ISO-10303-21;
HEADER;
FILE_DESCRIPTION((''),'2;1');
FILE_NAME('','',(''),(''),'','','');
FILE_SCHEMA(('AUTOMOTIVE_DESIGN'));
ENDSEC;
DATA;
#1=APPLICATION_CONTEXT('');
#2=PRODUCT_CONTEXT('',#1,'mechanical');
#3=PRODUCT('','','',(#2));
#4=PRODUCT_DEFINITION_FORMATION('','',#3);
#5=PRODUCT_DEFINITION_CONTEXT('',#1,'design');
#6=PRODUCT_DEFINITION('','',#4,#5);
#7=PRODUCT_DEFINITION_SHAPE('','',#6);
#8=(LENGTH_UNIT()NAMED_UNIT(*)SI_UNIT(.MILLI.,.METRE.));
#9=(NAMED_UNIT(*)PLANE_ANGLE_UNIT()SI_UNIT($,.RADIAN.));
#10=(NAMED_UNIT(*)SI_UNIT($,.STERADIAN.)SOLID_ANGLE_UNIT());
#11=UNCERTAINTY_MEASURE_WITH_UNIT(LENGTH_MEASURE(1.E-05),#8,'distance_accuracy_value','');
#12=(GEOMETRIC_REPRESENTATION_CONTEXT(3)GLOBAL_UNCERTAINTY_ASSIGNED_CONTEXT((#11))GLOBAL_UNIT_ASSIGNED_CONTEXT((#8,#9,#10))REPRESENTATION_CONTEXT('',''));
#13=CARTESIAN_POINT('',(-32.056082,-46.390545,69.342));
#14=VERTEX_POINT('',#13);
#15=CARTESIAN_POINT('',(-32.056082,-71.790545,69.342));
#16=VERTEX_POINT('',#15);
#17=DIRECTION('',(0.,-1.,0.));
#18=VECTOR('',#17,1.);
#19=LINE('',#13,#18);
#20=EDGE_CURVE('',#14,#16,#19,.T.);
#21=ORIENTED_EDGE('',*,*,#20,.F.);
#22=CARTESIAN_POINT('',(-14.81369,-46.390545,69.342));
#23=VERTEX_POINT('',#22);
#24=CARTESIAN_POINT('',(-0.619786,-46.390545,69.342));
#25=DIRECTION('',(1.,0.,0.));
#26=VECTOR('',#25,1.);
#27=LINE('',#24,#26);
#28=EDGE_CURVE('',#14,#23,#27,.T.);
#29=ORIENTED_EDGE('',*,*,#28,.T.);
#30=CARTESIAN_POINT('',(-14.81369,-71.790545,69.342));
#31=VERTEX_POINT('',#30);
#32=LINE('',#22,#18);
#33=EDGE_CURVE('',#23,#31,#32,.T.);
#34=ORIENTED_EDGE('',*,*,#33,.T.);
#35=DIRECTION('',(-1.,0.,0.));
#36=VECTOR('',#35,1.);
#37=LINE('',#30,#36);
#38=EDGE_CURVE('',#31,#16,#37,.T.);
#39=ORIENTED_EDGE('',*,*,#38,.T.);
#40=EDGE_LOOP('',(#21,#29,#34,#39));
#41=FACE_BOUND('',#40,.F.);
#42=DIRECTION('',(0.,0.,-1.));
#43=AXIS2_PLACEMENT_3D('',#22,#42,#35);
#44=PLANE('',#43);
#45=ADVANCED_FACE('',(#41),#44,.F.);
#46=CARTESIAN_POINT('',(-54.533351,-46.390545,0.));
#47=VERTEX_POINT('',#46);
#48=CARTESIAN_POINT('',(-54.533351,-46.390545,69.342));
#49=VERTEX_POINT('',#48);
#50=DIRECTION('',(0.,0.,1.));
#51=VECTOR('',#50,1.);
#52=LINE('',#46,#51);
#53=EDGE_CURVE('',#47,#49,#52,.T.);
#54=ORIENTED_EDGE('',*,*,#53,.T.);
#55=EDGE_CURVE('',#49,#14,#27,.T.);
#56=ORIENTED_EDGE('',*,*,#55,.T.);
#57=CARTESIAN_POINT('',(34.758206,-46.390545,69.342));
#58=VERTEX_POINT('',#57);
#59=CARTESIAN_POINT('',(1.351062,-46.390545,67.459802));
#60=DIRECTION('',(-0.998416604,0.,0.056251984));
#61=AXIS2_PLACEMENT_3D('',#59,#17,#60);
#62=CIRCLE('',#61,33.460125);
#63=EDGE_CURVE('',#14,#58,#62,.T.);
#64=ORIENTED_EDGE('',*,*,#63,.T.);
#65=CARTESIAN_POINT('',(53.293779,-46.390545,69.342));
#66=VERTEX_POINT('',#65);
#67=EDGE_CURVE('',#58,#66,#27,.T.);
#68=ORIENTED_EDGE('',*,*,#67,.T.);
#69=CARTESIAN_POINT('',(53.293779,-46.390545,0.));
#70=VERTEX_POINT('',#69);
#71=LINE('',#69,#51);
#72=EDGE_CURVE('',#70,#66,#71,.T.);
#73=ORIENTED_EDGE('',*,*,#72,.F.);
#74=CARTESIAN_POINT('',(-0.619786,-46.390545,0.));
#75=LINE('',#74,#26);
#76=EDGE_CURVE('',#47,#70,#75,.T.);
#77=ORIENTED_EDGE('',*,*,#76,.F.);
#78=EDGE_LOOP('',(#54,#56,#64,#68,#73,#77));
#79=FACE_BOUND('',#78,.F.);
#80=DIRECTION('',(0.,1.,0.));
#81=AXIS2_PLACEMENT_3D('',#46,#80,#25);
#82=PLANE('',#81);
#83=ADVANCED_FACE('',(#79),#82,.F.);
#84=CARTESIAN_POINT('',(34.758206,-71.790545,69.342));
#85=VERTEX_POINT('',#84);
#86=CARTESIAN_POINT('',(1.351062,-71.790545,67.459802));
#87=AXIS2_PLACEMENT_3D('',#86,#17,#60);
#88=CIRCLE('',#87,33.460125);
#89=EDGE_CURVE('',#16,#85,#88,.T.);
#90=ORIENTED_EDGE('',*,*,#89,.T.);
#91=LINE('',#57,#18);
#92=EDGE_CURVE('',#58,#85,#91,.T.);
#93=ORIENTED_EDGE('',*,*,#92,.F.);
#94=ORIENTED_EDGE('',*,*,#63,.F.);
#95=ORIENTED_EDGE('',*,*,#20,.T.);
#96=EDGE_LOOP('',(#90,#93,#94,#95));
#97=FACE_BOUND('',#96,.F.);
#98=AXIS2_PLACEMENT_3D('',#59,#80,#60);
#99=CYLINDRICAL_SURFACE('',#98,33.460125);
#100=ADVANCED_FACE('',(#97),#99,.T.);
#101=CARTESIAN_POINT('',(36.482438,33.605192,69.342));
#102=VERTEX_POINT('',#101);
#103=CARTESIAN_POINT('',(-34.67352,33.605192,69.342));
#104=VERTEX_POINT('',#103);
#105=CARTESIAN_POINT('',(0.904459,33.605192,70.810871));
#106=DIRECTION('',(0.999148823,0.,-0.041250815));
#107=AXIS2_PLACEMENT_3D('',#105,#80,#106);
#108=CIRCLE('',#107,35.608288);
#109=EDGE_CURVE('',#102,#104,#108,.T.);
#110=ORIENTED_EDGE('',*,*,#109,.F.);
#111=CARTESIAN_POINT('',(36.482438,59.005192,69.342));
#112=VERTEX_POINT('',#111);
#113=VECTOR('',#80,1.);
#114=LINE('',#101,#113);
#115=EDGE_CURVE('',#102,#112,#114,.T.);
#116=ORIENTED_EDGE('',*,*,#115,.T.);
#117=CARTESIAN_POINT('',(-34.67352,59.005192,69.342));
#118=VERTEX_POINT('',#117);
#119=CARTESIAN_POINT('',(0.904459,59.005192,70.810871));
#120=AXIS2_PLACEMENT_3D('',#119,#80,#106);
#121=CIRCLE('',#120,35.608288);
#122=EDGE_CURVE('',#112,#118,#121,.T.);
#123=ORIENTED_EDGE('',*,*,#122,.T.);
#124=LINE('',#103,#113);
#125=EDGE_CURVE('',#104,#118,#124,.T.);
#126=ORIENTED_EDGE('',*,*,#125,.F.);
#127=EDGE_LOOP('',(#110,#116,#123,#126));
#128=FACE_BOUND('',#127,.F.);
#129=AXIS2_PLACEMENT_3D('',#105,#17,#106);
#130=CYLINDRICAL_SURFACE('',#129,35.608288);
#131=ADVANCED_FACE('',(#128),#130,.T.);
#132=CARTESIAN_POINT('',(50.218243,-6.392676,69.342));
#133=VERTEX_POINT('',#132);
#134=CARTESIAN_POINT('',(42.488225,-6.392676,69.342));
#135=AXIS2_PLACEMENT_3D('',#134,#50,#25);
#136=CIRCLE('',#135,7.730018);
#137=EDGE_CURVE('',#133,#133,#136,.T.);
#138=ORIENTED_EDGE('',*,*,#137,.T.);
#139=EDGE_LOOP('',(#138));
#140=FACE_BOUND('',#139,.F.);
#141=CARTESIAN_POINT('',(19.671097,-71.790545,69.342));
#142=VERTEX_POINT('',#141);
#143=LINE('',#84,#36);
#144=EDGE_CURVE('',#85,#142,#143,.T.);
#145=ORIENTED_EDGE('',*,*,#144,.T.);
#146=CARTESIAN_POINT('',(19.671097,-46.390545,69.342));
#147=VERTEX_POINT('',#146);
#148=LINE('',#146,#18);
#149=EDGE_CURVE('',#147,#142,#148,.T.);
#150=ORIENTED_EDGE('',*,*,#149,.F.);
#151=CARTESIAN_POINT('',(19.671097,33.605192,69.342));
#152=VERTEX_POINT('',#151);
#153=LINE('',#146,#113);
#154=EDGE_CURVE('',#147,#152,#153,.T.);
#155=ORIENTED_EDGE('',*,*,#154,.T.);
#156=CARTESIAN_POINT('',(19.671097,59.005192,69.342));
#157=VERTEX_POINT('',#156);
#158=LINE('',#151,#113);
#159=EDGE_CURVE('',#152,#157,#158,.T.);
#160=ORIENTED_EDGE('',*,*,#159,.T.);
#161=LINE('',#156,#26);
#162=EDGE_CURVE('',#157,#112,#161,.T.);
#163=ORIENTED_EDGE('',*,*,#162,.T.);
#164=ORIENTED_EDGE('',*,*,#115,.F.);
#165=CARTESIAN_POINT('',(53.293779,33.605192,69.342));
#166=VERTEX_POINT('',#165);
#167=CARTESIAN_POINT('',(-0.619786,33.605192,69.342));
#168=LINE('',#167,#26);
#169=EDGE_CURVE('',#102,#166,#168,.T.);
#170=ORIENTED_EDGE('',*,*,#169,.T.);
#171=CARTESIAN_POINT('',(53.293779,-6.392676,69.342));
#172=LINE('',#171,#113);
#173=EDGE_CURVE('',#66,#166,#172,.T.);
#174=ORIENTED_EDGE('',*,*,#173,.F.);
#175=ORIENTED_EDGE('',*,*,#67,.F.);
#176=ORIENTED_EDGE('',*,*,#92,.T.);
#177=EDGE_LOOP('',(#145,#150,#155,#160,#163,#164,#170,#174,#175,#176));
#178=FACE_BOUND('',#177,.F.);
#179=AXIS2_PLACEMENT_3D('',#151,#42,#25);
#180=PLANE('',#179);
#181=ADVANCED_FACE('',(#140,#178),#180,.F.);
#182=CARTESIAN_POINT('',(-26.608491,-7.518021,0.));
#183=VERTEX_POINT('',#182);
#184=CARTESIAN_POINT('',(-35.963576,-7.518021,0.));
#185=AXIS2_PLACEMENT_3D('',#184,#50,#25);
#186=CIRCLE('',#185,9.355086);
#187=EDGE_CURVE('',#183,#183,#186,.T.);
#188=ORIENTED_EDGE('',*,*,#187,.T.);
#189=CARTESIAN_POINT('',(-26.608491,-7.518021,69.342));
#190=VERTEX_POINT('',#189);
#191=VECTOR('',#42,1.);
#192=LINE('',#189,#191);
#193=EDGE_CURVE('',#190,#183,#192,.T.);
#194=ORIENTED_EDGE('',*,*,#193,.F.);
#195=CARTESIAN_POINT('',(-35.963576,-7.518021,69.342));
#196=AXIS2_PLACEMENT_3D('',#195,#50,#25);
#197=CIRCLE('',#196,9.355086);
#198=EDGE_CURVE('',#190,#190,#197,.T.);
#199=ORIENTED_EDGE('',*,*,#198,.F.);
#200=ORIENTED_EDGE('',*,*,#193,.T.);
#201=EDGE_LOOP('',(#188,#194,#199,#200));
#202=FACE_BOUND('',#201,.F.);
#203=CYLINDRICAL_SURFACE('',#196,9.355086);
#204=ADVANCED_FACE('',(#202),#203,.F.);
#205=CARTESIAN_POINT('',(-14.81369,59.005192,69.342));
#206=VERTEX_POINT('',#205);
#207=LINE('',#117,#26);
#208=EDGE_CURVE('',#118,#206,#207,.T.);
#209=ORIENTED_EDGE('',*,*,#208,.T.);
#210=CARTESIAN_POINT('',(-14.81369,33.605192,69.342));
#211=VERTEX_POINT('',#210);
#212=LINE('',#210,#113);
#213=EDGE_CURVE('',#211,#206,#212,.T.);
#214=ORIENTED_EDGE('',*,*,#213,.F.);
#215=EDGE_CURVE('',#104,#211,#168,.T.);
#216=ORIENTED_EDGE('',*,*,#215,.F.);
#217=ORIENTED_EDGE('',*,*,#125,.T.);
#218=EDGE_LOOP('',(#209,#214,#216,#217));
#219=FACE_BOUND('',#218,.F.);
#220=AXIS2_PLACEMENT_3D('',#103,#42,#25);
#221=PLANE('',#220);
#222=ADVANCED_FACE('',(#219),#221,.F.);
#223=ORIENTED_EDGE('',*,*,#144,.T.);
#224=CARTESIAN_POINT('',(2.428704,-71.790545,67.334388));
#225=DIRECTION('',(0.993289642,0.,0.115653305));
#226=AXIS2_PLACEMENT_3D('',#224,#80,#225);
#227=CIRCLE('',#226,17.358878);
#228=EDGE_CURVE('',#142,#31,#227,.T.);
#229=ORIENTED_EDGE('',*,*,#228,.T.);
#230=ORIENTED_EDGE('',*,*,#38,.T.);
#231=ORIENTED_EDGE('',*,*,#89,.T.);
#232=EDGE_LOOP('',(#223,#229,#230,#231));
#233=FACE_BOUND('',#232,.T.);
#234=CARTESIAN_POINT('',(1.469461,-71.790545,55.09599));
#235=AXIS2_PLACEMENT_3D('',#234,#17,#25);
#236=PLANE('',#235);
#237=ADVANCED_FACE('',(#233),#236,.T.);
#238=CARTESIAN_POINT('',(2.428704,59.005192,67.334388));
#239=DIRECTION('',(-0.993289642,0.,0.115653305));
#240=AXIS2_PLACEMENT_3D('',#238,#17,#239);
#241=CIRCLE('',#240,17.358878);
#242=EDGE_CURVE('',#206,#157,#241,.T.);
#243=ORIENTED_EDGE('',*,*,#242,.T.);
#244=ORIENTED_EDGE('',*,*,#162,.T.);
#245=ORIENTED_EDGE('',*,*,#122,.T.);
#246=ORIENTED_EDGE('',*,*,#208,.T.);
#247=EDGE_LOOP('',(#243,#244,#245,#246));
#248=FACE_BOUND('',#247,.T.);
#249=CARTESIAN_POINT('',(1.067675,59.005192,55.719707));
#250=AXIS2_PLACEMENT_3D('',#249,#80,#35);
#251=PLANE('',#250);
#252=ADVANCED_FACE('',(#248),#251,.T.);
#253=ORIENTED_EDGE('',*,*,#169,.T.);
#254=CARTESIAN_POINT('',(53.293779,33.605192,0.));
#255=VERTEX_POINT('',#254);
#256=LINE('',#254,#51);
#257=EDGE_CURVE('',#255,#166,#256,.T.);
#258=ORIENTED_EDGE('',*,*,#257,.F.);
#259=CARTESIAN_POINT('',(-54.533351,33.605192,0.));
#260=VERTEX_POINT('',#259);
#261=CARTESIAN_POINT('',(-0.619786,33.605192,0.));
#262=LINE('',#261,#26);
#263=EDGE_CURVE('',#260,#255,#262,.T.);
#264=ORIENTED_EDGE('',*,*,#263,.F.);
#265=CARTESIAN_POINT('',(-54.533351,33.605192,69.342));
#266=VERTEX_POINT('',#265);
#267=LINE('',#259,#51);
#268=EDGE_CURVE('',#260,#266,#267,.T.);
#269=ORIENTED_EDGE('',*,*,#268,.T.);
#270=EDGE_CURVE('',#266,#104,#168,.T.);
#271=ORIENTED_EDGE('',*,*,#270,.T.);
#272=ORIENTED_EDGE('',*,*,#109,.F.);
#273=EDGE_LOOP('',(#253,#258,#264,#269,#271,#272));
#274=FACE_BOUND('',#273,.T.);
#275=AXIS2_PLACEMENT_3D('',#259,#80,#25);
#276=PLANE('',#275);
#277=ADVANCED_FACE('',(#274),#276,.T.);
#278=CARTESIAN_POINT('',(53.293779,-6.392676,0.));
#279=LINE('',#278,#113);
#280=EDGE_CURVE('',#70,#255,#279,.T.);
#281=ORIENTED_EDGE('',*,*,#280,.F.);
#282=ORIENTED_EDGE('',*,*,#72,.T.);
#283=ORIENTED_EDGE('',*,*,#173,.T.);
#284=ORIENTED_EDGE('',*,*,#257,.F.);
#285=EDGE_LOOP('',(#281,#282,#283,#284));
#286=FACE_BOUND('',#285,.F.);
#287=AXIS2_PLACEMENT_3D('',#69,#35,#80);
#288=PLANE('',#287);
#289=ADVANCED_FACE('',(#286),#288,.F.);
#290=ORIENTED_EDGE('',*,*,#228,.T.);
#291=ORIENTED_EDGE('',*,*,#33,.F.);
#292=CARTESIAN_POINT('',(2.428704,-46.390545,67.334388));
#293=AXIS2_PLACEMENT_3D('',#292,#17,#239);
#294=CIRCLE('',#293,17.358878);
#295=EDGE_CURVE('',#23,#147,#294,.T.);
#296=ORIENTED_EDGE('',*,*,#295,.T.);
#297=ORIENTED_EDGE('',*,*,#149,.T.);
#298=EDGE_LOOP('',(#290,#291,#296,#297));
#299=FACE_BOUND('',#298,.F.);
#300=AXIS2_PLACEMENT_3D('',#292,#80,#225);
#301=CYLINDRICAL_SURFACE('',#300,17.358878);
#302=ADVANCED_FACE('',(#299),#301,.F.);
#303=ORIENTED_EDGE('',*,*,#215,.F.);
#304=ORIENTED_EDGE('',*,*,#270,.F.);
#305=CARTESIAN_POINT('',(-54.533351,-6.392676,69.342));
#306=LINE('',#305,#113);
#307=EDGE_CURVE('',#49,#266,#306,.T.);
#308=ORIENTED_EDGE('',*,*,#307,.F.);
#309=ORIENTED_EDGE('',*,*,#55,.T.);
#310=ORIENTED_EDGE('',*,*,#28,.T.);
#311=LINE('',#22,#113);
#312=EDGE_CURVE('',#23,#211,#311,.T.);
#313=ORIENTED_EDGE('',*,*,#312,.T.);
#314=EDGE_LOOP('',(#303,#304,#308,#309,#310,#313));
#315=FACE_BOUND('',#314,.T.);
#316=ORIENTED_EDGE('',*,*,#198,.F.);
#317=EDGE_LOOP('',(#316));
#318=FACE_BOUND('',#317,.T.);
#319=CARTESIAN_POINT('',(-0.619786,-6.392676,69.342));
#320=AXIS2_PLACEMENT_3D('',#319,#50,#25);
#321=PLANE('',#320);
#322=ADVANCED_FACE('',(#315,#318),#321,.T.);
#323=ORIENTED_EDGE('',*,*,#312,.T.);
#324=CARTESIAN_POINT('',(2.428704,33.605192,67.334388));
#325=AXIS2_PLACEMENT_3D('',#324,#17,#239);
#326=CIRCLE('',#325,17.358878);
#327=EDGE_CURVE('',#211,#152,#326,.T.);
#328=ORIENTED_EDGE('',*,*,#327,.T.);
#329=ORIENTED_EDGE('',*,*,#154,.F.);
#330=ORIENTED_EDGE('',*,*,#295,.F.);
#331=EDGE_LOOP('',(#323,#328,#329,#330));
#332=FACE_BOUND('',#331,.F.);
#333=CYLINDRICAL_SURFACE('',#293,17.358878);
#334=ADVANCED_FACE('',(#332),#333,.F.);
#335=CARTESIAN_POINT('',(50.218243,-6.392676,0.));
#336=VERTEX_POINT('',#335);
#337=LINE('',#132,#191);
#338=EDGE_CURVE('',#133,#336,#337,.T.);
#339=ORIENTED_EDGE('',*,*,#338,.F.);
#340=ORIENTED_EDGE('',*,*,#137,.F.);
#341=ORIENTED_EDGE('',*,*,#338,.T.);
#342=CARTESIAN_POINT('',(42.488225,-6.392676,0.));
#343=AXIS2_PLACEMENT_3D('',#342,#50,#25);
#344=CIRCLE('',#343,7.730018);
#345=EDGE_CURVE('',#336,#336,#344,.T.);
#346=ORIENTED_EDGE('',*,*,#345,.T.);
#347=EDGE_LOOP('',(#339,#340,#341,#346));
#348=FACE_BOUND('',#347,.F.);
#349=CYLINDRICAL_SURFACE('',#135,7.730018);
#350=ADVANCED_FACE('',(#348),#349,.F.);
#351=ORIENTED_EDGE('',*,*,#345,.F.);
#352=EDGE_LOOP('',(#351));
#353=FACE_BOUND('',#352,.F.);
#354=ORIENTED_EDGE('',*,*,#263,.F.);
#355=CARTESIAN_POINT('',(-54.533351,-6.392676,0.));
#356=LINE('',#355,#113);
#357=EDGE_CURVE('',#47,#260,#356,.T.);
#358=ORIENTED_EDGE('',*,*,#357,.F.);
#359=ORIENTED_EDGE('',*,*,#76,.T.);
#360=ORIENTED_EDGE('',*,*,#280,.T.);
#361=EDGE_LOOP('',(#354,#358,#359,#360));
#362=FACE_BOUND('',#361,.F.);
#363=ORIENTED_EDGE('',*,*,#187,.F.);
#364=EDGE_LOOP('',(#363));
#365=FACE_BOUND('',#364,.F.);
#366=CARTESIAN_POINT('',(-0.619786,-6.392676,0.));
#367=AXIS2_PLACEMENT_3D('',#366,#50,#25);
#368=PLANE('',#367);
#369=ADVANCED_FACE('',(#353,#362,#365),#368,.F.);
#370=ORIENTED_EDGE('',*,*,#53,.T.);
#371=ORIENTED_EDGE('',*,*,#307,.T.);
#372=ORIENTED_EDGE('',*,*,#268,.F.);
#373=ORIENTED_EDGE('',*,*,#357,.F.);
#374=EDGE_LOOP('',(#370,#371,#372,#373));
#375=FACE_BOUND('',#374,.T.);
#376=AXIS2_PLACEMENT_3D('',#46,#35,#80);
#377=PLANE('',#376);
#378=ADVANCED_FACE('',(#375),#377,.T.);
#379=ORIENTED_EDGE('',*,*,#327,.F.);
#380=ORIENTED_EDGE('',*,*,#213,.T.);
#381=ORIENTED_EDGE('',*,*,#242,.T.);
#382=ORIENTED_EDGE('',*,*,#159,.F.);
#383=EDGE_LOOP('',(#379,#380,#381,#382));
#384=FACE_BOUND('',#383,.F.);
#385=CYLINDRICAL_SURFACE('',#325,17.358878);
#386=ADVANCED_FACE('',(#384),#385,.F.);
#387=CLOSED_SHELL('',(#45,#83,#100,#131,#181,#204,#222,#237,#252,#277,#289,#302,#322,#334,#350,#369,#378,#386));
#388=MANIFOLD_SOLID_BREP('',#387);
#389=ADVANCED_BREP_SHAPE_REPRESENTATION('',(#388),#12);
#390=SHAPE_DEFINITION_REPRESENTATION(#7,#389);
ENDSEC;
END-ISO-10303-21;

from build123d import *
from build123d import SkipClean  # not in build123d's __all__

# Parameters (mm, degrees)
F0_W     = 107.8271307051
F0_H     = 79.9957364798
F1_DEPTH = 69.342
F3_DEPTH = 171.704
F4_DEPTH = 25.4
F6_DEPTH = 25.4
F7_R     = 9.3550857854
F8_DEPTH = 220.218
F7_R_2   = 7.7300183475
F9_DEPTH = 194.31


# Not quite as in the source:
# - after a boolean that leaves OpenCascade's solid faulty, fix() repairs it


with BuildPart() as f1:
    # F0 (on Top) → F1 (new body)
    with BuildSketch(Plane.XY):
        with Locations((-0.6197858602, -6.3926763833)):
            Rectangle(F0_W, F0_H)
    extrude(amount=F1_DEPTH)

    # F2 (on face) → F3 (cut)
    with BuildSketch(Plane.XZ.offset(46.3905446231)):
        with BuildLine():
            Line((19.6710973978, 69.342), (-14.813689515, 69.342))
            ThreePointArc((-14.813689515, 69.342), (2.4287039414, 49.9755106866), (19.6710973978, 69.342))
        make_face()
    extrude(amount=-F3_DEPTH, mode=Mode.SUBTRACT)

    # F2 (on face) → F4 (join)
    with BuildSketch(Plane.XZ.offset(46.3905446231)):
        with BuildLine():
            Line((-14.813689515, 69.342), (-32.0560820401, 69.342))
            ThreePointArc((-32.0560820401, 69.342), (1.3510622084, 33.9996767093), (34.7582064569, 69.342))
            Line((34.7582064569, 69.342), (19.6710973978, 69.342))
            ThreePointArc((19.6710973978, 69.342), (2.4287039414, 49.9755106866), (-14.813689515, 69.342))
        make_face()
    with SkipClean():  # cleaning this boolean's faces spoils the solid; the shape is the same uncleaned
        extrude(amount=F4_DEPTH)

    # F5 (on face) → F6 (join)
    with BuildSketch(Plane(origin=(0, 33.6051918566, 0), x_dir=(-1, 0, 0), z_dir=(0, 1, 0))):
        with BuildLine():
            Line((-19.6710973978, 69.342), (-36.4824384451, 69.342))
            ThreePointArc((-36.4824384451, 69.342), (-0.9044590406, 35.2025825454), (34.6735203639, 69.342))
            Line((34.6735203639, 69.342), (14.813689515, 69.342))
            ThreePointArc((14.813689515, 69.342), (-2.4287039414, 49.9755106866), (-19.6710973978, 69.342))
        make_face()
    extrude(amount=F6_DEPTH)

    add(f1.part.fix(), mode=Mode.REPLACE)

    # F7 (on face) → F8 (cut)
    with BuildSketch(Plane.XY.offset(69.342)):
        with Locations((-35.963576287, -7.5180209242)):
            Circle(F7_R)
    extrude(amount=-F8_DEPTH, mode=Mode.SUBTRACT)

    # F7 (on face) → F9 (cut)
    with BuildSketch(Plane.XY.offset(69.342)):
        with Locations((42.4882248044, -6.3926763833)):
            Circle(F7_R_2)
    extrude(amount=-F9_DEPTH, mode=Mode.SUBTRACT)


solid = f1.part
